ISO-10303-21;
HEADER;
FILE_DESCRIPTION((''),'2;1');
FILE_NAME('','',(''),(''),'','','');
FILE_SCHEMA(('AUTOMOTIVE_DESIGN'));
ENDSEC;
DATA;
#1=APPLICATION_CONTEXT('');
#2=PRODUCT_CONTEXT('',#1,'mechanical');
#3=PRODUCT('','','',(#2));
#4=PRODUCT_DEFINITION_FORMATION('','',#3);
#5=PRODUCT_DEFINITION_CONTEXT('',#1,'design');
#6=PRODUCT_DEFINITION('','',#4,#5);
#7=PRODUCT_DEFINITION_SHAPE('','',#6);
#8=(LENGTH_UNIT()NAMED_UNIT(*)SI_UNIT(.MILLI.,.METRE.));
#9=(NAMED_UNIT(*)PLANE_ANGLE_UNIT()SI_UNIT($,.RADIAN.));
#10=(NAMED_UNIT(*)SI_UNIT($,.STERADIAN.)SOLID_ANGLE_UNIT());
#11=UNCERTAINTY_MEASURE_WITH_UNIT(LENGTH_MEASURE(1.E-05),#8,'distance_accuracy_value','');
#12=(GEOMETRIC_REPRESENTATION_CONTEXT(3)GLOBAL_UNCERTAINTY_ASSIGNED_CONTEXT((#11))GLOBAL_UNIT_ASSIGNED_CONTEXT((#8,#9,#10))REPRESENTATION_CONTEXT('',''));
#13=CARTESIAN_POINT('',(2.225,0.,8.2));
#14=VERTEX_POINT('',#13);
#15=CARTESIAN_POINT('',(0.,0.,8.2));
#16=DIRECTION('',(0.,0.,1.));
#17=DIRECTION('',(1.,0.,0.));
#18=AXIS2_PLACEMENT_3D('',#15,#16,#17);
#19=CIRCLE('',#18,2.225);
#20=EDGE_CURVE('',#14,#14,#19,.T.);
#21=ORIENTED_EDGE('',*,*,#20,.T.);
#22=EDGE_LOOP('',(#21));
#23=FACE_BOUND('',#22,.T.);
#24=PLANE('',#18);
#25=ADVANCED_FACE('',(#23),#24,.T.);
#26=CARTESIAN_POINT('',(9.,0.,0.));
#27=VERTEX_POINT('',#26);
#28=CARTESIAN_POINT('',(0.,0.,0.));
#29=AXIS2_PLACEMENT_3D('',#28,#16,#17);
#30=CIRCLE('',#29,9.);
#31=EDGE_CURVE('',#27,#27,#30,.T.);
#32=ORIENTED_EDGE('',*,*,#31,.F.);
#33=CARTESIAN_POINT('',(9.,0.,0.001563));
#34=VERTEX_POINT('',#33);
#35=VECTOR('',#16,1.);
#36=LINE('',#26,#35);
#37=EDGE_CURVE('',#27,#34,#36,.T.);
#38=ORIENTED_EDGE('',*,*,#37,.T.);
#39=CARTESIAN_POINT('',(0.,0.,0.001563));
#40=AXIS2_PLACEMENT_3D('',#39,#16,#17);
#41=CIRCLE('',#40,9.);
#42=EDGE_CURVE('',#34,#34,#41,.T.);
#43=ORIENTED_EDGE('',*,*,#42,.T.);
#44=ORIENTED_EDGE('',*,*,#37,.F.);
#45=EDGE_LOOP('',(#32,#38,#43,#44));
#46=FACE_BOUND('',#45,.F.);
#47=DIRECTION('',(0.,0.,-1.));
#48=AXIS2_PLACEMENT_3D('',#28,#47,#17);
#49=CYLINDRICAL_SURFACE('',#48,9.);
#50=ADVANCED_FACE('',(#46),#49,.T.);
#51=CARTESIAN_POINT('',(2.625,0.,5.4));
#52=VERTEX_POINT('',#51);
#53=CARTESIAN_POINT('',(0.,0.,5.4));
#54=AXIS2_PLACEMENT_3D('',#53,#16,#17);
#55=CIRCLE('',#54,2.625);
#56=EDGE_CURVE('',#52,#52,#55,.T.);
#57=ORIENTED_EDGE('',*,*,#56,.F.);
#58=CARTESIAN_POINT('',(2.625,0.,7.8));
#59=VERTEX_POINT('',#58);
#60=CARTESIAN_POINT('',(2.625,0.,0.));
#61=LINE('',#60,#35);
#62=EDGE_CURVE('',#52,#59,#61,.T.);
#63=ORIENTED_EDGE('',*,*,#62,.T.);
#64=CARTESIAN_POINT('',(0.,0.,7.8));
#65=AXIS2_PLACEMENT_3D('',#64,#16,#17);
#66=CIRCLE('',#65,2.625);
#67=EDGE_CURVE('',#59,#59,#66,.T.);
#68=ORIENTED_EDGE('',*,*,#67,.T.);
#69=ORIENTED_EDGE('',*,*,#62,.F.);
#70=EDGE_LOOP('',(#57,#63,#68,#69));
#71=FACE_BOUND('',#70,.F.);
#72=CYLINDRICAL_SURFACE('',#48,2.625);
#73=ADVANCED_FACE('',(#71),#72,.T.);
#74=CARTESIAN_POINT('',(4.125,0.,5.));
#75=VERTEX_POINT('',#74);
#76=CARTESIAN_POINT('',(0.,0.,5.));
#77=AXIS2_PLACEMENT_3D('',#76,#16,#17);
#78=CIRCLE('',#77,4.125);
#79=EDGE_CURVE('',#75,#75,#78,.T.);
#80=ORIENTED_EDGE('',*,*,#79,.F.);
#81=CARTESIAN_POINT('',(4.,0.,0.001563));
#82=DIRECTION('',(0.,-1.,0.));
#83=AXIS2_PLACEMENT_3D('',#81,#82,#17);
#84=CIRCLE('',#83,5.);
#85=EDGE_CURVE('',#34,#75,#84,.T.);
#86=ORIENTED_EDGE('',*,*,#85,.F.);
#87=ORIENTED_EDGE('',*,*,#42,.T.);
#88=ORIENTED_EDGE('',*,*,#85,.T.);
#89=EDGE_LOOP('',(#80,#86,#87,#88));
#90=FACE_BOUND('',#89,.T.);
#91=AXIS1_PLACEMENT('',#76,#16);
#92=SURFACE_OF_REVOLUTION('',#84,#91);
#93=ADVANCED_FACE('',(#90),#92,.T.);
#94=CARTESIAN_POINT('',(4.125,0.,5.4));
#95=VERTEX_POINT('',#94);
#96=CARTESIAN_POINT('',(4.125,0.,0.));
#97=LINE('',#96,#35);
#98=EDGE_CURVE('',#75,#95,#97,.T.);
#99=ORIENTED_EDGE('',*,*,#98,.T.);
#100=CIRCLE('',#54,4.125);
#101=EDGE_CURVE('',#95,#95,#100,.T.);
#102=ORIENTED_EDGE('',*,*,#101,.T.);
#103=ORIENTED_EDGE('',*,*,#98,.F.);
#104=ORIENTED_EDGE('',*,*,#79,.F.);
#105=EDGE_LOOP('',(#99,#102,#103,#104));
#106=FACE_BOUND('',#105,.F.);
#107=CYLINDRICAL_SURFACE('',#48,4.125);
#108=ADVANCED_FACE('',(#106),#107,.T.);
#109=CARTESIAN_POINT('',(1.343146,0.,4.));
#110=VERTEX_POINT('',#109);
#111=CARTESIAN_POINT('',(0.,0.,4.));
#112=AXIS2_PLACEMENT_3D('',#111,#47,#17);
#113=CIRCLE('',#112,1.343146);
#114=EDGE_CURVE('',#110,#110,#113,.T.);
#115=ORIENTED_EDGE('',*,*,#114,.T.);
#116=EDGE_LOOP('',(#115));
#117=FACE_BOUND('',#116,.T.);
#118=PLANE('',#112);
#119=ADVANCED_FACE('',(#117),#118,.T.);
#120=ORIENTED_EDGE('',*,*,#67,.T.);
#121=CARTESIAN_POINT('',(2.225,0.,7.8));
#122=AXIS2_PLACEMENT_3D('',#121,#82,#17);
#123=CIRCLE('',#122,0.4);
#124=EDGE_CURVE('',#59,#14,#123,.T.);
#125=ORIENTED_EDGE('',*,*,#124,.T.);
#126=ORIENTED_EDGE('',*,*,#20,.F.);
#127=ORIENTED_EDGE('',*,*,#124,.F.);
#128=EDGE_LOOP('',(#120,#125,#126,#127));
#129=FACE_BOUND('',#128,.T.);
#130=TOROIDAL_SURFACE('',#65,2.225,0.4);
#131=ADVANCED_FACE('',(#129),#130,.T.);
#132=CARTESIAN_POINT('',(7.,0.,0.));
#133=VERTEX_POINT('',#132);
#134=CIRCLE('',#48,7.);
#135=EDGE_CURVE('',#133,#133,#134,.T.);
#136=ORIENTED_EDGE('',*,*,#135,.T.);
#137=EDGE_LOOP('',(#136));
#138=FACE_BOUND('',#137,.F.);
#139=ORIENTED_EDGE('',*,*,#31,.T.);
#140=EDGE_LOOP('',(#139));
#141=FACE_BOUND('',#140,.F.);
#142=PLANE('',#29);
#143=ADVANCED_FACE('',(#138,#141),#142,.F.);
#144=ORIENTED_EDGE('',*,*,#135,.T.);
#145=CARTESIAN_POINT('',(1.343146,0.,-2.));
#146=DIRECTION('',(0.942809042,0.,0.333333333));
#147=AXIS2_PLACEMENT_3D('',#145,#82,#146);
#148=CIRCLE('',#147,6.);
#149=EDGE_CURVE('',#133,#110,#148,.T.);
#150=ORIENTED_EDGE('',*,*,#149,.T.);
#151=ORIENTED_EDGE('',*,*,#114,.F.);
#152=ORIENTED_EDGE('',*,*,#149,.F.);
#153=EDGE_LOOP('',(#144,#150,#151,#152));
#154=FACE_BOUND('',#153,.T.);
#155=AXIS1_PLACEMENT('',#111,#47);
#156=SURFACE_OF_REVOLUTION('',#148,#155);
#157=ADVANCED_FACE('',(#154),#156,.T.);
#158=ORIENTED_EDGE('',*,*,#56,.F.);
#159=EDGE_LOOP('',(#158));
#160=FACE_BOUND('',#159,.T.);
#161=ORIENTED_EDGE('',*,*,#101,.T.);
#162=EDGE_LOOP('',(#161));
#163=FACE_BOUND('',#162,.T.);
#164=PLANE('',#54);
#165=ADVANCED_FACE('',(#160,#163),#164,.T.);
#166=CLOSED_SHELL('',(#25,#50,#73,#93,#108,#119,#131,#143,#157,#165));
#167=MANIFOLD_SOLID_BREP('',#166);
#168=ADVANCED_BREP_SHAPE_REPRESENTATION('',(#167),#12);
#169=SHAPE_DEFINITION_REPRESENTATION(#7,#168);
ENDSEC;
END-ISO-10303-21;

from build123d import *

# Parameters (mm, degrees)
F0_R     = 9
F0_R_2   = 4.125
F1_DEPTH = 5
F0_R_3   = 2.625
F2_DEPTH = 5.4
F3_DEPTH = 8.2
F4_R     = 7
F5_DEPTH = 4
F8_R     = 0.4


# Not quite as in the source:
# - a fillet or chamfer that OpenCascade refuses, or shapes differently, is made with other operations: its cross-section is extruded or revolved along the edge and cut away or added


with BuildPart() as f1:
    # F0 (on Top) → F1 (new body)
    with BuildSketch(Plane.XY):
        Circle(F0_R)
        Circle(F0_R_2, mode=Mode.SUBTRACT)
    extrude(amount=F1_DEPTH)

    # F0 (on Top) → F2 (join)
    with BuildSketch(Plane.XY):
        Circle(F0_R_2)
        Circle(F0_R_3, mode=Mode.SUBTRACT)
    extrude(amount=F2_DEPTH)

    # F0 (on Top) → F3 (join)
    with BuildSketch(Plane.XY):
        Circle(F0_R_3)
    extrude(amount=F3_DEPTH)

    # F4 (on face) → F5 (cut)
    with BuildSketch(Plane(origin=(0, 0, 0), x_dir=(1, 0, 0), z_dir=(0, 0, -1))):
        Circle(F4_R)
    extrude(amount=-F5_DEPTH, mode=Mode.SUBTRACT)

    # F6: fillet of radius 6 on 1 edges, made by hand

    # F6_s1 → F6_t2 (revolve)
    with BuildSketch(Plane.XZ):
        with BuildLine():
            ThreePointArc((7, 0), (4.8072473656, 2.8989794856), (1.3431457505, 4))
            Line((1.3431457505, 4), (7, 4))
            Line((7, 4), (7, 0))
        make_face()
    revolve(axis=Axis((0, 0, 4), (0, 0, -1)))

    # F7: fillet of radius 5 on 1 edges, made by hand

    # F7_s1 → F7_t2 (revolve, cut)
    with BuildSketch(Plane.XZ):
        with BuildLine():
            ThreePointArc((9, 0.0015627442), (7.5794552658, 3.4926227552), (4.125, 5))
            Line((4.125, 5), (9, 5))
            Line((9, 5), (9, 0.0015627442))
        make_face()
    revolve(axis=Axis((0, 0, 5), (0, 0, 1)), mode=Mode.SUBTRACT)

    # F8
    f8_edges = [f1.edges().sort_by_distance(p)[0] for p in [
        (-2.625, 0, 8.2),
    ]]
    fillet(f8_edges, radius=F8_R)


solid = f1.part
